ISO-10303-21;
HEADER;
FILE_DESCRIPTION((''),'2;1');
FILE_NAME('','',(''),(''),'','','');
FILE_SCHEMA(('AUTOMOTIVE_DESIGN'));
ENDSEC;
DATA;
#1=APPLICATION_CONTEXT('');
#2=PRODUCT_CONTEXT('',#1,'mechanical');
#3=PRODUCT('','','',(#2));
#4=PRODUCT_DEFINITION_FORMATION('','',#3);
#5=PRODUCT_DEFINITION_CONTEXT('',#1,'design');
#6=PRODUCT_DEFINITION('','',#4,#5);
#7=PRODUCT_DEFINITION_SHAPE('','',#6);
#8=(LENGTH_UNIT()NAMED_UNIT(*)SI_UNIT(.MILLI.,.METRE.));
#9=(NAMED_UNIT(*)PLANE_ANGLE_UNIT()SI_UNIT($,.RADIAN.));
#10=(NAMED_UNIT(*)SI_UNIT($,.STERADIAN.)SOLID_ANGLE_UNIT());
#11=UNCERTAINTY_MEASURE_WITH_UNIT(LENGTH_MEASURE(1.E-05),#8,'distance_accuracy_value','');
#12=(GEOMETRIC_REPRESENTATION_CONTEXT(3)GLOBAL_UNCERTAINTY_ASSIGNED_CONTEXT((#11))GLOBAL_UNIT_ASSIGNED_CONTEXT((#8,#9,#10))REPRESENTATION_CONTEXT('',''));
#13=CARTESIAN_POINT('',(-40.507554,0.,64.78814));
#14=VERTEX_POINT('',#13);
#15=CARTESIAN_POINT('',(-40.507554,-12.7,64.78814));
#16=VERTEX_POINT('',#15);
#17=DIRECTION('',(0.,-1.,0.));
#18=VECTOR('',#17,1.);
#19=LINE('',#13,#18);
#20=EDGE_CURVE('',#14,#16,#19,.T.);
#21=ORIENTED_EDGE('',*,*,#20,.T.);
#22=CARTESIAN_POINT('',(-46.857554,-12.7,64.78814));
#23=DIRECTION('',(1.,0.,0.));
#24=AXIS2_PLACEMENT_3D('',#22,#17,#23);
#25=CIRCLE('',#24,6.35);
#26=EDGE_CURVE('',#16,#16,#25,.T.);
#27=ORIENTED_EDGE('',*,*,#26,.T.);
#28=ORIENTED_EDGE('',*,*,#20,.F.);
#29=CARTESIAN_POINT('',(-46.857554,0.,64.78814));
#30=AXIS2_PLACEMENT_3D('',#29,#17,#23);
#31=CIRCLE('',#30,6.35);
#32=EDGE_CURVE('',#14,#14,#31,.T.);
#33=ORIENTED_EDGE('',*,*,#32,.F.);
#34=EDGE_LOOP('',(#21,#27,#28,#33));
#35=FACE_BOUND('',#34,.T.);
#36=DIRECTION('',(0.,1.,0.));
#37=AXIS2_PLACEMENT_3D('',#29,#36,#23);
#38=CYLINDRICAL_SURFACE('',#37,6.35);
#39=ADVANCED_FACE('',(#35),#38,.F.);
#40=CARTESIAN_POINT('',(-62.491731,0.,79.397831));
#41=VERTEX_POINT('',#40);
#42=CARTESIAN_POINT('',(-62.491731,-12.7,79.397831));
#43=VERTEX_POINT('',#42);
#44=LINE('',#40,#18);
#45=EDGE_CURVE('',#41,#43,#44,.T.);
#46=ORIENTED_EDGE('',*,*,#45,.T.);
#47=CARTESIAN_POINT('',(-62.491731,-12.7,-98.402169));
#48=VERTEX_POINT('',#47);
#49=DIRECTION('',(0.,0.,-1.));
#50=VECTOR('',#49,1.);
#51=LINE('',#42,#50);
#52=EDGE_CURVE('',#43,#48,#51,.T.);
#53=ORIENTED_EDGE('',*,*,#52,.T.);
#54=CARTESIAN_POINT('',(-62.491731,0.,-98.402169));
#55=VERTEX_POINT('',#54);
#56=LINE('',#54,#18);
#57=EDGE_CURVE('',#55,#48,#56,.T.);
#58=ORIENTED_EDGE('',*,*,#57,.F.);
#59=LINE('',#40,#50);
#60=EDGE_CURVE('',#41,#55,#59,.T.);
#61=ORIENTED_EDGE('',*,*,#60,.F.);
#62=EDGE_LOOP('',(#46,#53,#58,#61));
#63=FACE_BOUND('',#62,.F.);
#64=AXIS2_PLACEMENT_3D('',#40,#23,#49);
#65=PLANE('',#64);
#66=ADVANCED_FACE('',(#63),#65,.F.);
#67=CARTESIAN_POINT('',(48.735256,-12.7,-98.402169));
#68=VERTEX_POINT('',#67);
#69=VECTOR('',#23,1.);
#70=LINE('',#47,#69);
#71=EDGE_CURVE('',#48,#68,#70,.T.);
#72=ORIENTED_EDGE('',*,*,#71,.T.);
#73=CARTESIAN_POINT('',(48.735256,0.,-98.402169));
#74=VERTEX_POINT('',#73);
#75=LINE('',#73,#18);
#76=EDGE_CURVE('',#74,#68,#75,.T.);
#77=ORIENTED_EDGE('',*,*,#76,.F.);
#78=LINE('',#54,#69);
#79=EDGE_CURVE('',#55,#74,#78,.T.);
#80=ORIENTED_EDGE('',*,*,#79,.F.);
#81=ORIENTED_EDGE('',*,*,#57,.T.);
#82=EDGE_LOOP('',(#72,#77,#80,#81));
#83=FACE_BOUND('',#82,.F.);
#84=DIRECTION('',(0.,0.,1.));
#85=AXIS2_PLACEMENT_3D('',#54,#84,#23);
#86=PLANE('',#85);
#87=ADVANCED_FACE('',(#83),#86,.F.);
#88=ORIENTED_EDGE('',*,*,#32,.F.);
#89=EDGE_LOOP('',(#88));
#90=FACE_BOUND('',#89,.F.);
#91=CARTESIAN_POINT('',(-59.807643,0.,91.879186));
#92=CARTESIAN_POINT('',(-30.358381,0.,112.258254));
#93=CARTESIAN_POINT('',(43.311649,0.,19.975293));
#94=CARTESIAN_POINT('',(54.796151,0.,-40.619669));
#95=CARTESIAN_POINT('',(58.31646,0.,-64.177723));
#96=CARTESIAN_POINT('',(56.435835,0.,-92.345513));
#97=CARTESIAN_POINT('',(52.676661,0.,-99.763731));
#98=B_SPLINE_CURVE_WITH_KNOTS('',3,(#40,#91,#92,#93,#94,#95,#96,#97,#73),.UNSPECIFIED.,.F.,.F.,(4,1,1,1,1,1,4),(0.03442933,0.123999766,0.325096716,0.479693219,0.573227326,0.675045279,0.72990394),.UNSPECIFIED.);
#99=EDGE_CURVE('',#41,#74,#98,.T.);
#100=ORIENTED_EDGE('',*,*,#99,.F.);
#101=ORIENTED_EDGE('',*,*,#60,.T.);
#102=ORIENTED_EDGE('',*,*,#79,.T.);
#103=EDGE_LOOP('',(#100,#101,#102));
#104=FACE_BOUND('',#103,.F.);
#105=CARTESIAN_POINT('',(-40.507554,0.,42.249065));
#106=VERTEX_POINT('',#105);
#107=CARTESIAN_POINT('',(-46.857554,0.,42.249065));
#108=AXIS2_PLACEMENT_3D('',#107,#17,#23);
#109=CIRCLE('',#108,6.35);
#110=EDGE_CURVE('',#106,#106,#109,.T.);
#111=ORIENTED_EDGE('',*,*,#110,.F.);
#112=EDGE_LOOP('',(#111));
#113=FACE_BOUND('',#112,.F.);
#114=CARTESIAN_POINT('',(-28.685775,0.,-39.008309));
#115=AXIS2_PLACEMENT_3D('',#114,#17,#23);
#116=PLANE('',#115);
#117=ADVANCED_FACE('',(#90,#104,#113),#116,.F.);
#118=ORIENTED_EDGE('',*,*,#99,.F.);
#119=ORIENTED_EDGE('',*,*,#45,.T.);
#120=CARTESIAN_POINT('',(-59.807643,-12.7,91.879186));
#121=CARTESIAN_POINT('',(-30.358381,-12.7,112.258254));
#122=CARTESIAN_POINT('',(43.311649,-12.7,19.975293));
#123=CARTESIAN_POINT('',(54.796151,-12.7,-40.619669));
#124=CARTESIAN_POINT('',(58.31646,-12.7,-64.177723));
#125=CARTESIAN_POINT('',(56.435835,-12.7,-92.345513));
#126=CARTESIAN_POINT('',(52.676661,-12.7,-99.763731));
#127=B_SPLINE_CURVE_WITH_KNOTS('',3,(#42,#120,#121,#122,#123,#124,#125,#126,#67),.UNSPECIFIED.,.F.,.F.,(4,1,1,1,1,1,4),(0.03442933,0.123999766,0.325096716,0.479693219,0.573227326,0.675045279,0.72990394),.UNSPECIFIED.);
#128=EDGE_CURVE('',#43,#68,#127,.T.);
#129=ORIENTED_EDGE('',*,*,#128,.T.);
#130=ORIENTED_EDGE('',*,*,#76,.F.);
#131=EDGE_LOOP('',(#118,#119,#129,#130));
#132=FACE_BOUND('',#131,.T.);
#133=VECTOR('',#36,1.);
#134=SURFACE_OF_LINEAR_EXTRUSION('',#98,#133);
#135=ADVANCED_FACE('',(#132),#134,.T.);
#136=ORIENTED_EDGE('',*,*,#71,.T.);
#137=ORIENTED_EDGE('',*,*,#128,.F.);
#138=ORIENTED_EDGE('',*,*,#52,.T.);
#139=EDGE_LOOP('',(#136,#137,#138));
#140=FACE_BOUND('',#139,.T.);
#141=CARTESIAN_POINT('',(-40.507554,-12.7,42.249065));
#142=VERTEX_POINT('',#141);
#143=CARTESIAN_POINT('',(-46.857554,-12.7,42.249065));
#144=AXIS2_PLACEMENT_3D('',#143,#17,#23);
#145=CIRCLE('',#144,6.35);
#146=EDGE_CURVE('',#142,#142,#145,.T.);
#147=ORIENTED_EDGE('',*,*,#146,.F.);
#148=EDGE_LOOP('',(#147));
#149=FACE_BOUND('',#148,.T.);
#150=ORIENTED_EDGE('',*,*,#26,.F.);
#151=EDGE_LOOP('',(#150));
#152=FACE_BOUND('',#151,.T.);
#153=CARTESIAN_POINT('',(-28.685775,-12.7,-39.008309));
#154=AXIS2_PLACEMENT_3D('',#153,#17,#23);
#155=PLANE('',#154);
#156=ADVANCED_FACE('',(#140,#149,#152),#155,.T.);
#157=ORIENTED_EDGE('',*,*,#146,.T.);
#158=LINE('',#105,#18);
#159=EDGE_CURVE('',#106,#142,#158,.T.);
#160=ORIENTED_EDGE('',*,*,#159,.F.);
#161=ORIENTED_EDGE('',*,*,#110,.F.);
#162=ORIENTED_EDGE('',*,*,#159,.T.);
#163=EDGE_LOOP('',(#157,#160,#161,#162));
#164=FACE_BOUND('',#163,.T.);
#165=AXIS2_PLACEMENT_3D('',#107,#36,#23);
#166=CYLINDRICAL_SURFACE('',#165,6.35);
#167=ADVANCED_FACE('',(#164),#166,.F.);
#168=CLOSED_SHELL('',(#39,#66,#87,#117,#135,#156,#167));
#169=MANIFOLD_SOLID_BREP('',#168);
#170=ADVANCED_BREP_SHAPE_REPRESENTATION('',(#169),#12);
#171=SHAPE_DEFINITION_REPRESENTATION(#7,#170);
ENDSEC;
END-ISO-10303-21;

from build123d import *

# Parameters (mm, degrees)
F0_R     = 6.35
F1_DEPTH = 12.7


with BuildPart() as f1:
    # F0 (on Front) → F1 (new body)
    with BuildSketch(Plane.XZ):
        with BuildLine():
            Line((-62.4917310791, 62.3387722267), (-62.4917310791, -98.4021690574))
            Line((-62.4917310791, -98.4021690574), (48.7352559237, -98.4021690574))
            add(Edge.make_bspline(
                [(48.7352559237, -98.4021690574), (29.3297900082, -91.6985332362), (-53.7117630872, 10.9735691095), (-62.4917310791, 62.3387722267)],
                knots=[0.7299039405, 0.7299039405, 0.7299039405, 0.7299039405, 1, 1, 1, 1], degree=3))
        make_face()
        with BuildLine():
            add(Edge.make_bspline(
                [(48.7352559237, -98.4021690574), (29.3297900082, -91.6985332362), (-53.7117630872, 10.9735691095), (-62.4917310791, 62.3387722267)],
                knots=[0.7299039405, 0.7299039405, 0.7299039405, 0.7299039405, 1, 1, 1, 1], degree=3))
            add(Edge.make_bspline(
                [(-62.4917310791, 79.3978309426), (-59.8076427315, 91.8791864682), (-30.3583811457, 112.2582538654), (43.3116486469, 19.975292811), (54.796151396, -40.6196685771), (58.3164600027, -64.1777234903), (56.4358345174, -92.3455133169), (52.6766606255, -99.7637308905), (48.7352559237, -98.4021690574)],
                knots=[0.03442933, 0.03442933, 0.03442933, 0.03442933, 0.1239997664, 0.3250967159, 0.4796932186, 0.573227326, 0.6750452793, 0.7299039405, 0.7299039405, 0.7299039405, 0.7299039405], degree=3))
            Line((-62.4917310791, 79.3978309426), (-62.4917310791, 62.3387722267))
        make_face()
        with Locations((-46.8575544655, 42.2490648925)):
            Circle(F0_R, mode=Mode.SUBTRACT)
        with Locations((-46.8575544655, 64.7881403565)):
            Circle(F0_R, mode=Mode.SUBTRACT)
    extrude(amount=F1_DEPTH)


solid = f1.part
